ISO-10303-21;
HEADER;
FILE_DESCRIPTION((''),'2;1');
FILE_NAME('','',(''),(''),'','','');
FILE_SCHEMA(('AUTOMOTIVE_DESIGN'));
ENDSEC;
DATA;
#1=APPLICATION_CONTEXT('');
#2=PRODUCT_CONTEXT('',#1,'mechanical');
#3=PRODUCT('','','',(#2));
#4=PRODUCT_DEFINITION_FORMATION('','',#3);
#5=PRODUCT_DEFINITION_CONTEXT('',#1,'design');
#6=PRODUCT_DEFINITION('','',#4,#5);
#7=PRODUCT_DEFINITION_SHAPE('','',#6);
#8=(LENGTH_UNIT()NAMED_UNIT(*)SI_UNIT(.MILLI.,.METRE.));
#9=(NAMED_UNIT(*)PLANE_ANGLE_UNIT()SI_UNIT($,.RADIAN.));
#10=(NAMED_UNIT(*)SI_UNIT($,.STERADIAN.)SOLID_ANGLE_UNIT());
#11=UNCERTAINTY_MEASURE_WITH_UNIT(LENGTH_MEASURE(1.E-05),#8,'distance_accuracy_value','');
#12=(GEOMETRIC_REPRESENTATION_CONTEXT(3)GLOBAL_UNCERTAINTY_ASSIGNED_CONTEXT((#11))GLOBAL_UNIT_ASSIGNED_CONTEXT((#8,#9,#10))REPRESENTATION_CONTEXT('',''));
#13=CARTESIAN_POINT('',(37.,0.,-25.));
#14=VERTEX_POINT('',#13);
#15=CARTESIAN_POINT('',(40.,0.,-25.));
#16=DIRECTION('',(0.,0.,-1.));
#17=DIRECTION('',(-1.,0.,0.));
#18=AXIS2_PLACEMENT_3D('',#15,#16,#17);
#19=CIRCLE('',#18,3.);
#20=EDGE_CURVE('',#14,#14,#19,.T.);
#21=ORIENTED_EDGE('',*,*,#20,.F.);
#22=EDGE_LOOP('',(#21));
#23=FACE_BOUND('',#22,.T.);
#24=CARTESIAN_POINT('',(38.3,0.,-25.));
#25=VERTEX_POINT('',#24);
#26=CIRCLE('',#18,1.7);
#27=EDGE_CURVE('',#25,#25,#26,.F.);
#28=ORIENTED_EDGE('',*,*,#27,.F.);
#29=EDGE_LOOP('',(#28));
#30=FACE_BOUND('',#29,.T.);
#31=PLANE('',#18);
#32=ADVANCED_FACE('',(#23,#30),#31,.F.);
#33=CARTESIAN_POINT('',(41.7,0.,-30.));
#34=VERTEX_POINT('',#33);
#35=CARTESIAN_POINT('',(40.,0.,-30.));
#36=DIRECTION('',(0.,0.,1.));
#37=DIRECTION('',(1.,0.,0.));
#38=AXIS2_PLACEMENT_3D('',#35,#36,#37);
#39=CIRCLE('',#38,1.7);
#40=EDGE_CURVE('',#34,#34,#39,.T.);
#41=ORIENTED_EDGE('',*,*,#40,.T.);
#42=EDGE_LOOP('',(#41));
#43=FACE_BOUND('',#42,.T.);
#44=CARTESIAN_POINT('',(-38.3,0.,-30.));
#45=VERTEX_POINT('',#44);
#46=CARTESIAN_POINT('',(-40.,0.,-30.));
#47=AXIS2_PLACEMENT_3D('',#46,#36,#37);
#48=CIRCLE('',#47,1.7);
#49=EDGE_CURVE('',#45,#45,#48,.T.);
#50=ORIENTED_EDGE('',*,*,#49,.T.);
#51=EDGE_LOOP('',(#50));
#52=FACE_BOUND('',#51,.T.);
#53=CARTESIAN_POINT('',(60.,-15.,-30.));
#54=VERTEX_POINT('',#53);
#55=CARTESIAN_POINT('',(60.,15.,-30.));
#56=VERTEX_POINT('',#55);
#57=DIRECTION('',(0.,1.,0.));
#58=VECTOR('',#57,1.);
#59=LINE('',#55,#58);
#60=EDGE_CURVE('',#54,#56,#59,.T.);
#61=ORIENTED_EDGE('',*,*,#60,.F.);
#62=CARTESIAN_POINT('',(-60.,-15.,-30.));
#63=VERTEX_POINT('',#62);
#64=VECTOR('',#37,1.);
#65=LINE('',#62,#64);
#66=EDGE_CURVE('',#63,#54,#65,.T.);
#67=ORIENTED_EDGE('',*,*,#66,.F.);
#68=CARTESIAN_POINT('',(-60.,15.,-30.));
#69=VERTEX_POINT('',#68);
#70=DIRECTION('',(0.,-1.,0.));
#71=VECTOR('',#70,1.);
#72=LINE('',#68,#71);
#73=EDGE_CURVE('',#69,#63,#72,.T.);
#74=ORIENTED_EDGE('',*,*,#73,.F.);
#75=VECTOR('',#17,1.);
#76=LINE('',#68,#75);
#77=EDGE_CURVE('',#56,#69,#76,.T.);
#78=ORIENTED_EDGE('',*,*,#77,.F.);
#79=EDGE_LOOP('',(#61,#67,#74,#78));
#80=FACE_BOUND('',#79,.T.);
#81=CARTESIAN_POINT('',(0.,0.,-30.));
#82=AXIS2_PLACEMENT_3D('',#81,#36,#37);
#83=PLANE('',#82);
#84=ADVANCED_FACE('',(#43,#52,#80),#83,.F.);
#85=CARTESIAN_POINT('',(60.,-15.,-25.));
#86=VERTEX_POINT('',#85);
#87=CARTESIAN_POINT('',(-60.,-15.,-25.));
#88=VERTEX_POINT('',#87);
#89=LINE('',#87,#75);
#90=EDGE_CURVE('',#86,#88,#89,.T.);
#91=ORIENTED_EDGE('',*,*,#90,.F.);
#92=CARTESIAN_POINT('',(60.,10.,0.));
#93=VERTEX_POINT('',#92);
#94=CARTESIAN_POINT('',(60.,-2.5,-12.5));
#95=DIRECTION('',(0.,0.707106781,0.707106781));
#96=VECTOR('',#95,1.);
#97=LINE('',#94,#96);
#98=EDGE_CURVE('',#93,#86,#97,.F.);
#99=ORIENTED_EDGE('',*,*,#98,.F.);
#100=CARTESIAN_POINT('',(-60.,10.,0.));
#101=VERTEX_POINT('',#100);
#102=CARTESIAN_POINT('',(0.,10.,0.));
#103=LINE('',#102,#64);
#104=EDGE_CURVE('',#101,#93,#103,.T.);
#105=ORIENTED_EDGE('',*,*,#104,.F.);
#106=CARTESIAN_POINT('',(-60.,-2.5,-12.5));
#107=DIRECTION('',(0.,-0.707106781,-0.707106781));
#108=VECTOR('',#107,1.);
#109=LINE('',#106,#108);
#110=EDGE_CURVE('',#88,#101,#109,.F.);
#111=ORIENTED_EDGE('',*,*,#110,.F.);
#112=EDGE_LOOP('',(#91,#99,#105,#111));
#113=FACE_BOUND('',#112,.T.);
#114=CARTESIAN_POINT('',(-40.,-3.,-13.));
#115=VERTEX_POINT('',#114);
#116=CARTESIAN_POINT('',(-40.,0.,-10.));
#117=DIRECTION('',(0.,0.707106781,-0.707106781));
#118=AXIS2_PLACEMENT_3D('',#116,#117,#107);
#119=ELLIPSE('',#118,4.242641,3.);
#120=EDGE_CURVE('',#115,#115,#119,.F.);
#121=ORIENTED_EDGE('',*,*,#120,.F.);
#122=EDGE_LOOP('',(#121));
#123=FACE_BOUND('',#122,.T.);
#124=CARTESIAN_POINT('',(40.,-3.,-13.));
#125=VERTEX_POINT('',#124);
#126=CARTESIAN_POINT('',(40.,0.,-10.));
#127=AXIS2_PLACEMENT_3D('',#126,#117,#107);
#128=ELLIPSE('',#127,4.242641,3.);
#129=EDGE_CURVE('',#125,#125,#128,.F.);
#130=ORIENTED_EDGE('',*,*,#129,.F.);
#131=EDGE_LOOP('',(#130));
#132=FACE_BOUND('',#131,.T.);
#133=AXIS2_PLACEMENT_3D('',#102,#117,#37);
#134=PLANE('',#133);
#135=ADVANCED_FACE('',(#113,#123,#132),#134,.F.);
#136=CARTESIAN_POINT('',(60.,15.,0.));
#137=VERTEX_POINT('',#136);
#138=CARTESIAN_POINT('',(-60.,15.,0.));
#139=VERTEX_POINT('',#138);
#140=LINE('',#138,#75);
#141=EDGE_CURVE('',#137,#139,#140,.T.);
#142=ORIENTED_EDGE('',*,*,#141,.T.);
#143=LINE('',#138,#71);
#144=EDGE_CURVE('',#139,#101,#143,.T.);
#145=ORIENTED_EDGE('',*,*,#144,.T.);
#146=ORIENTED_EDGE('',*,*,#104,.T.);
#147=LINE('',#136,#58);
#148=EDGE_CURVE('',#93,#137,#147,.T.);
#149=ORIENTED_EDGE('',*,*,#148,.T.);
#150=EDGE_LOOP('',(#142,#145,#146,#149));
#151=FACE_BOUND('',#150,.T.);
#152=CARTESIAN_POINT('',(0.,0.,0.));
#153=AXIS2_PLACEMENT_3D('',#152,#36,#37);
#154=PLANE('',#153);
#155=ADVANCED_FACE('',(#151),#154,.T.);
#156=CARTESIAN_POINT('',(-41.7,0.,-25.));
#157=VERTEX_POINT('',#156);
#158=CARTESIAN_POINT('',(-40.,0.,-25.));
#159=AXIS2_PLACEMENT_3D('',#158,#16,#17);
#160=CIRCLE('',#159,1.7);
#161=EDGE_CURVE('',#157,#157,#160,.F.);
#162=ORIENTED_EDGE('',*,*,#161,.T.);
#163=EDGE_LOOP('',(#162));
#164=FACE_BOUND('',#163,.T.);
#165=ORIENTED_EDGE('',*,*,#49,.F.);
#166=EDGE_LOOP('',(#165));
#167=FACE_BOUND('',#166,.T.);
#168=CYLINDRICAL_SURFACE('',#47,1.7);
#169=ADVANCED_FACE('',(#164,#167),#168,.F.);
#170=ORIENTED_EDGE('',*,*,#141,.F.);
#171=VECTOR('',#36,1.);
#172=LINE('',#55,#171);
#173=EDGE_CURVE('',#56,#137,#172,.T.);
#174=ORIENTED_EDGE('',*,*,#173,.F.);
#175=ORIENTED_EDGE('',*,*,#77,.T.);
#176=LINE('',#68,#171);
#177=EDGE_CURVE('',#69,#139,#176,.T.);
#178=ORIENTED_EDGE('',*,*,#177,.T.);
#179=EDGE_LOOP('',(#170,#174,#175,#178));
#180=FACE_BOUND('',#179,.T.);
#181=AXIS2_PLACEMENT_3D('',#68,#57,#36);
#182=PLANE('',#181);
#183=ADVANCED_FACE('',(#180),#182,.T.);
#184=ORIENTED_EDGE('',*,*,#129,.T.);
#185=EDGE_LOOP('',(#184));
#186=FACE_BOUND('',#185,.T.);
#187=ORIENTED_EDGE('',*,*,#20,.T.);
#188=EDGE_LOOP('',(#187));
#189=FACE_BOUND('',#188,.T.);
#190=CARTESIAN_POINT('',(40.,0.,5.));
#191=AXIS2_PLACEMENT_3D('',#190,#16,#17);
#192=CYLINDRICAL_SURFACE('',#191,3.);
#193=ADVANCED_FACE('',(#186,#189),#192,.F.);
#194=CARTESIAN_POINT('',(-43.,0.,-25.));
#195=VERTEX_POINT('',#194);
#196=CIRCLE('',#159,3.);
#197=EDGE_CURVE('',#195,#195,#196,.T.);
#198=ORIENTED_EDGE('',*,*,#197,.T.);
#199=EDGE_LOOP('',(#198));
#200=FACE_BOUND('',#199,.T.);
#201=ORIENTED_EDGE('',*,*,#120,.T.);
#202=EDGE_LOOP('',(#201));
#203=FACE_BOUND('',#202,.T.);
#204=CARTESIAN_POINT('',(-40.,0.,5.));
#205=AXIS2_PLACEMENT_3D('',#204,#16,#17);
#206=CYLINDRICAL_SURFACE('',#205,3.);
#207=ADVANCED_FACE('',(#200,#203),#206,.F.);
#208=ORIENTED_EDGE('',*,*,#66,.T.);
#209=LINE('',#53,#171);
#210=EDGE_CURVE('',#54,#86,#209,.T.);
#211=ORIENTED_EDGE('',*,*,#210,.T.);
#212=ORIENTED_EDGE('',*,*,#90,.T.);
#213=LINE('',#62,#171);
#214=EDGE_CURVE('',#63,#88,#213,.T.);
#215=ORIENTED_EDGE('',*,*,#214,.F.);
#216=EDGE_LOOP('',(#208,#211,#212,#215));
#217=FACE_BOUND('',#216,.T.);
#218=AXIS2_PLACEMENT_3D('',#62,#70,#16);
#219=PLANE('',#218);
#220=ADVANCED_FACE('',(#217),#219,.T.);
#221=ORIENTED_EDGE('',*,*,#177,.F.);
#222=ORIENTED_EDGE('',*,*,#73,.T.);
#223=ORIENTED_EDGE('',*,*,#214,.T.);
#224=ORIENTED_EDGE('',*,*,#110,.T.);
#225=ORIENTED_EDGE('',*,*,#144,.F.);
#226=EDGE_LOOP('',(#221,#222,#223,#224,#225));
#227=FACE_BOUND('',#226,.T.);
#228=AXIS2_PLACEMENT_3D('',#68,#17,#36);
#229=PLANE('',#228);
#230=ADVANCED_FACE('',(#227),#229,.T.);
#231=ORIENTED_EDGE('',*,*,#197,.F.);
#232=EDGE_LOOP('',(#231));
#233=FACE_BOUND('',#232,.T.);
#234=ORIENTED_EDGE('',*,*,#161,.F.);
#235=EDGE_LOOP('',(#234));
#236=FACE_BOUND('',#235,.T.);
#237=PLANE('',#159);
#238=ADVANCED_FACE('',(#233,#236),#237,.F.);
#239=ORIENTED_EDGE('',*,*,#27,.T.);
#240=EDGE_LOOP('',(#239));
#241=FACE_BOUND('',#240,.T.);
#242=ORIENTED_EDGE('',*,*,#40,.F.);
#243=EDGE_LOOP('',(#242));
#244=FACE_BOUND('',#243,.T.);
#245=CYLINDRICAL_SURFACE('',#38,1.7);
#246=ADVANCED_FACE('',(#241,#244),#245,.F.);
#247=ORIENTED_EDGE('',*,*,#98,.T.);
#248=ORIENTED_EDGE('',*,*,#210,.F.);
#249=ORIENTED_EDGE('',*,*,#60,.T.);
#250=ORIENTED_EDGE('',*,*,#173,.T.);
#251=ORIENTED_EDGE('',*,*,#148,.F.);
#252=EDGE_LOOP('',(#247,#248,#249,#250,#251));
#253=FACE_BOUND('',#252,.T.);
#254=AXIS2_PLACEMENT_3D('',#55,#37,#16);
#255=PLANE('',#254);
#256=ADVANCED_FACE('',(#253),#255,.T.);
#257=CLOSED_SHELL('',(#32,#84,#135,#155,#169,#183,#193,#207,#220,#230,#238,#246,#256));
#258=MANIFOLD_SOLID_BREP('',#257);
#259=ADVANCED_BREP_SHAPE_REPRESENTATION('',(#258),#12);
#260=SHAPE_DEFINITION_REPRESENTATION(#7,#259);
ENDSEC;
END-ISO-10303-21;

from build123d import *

# Parameters (mm, degrees)
SKETCH1_W           = 120
SKETCH1_H           = 30
SKETCH1_R           = 1.7
BOSS_EXTRUDE1_DEPTH = 30
SKETCH3_R           = 3
CUT_EXTRUDE1_DEPTH  = 30
CHAMFER1_SIZE       = 25


with BuildPart() as part:
    # Sketch1 → Boss-Extrude1 (new body)
    with BuildSketch(Plane.XY):
        Rectangle(SKETCH1_W, SKETCH1_H)
        with Locations((-40, 0)):
            Circle(SKETCH1_R, mode=Mode.SUBTRACT)
        with Locations((40, 0)):
            Circle(SKETCH1_R, mode=Mode.SUBTRACT)
    extrude(amount=-BOSS_EXTRUDE1_DEPTH)

    # Sketch3 → Cut-Extrude1 (cut)
    with BuildSketch(Plane(origin=(0, 0, -25), x_dir=(-1, 0, 0), z_dir=(0, 0, -1))):
        with Locations((-40, 0)):
            Circle(SKETCH3_R)
        with Locations((40, 0)):
            Circle(SKETCH3_R)
    extrude(amount=-CUT_EXTRUDE1_DEPTH, mode=Mode.SUBTRACT)

    # Chamfer1
    # the kernel refuses this chamfer: 25 mm, written as the material it takes off along each edge
    with BuildSketch(Plane(origin=(124.292074699, -15, 0), x_dir=(0, 0.9996219169112966, 0.02749587661058637), z_dir=(-1, 0, 0))) as chamfer1_piece_1:
        Polygon((CHAMFER1_SIZE * 0.999621916911, CHAMFER1_SIZE * 0.0274958766106), (-CHAMFER1_SIZE * 0.0274958766106, CHAMFER1_SIZE * 0.999621916911), (0, 0), align=None)
    extrude(amount=248.584149398, mode=Mode.SUBTRACT)


solid = part.part
